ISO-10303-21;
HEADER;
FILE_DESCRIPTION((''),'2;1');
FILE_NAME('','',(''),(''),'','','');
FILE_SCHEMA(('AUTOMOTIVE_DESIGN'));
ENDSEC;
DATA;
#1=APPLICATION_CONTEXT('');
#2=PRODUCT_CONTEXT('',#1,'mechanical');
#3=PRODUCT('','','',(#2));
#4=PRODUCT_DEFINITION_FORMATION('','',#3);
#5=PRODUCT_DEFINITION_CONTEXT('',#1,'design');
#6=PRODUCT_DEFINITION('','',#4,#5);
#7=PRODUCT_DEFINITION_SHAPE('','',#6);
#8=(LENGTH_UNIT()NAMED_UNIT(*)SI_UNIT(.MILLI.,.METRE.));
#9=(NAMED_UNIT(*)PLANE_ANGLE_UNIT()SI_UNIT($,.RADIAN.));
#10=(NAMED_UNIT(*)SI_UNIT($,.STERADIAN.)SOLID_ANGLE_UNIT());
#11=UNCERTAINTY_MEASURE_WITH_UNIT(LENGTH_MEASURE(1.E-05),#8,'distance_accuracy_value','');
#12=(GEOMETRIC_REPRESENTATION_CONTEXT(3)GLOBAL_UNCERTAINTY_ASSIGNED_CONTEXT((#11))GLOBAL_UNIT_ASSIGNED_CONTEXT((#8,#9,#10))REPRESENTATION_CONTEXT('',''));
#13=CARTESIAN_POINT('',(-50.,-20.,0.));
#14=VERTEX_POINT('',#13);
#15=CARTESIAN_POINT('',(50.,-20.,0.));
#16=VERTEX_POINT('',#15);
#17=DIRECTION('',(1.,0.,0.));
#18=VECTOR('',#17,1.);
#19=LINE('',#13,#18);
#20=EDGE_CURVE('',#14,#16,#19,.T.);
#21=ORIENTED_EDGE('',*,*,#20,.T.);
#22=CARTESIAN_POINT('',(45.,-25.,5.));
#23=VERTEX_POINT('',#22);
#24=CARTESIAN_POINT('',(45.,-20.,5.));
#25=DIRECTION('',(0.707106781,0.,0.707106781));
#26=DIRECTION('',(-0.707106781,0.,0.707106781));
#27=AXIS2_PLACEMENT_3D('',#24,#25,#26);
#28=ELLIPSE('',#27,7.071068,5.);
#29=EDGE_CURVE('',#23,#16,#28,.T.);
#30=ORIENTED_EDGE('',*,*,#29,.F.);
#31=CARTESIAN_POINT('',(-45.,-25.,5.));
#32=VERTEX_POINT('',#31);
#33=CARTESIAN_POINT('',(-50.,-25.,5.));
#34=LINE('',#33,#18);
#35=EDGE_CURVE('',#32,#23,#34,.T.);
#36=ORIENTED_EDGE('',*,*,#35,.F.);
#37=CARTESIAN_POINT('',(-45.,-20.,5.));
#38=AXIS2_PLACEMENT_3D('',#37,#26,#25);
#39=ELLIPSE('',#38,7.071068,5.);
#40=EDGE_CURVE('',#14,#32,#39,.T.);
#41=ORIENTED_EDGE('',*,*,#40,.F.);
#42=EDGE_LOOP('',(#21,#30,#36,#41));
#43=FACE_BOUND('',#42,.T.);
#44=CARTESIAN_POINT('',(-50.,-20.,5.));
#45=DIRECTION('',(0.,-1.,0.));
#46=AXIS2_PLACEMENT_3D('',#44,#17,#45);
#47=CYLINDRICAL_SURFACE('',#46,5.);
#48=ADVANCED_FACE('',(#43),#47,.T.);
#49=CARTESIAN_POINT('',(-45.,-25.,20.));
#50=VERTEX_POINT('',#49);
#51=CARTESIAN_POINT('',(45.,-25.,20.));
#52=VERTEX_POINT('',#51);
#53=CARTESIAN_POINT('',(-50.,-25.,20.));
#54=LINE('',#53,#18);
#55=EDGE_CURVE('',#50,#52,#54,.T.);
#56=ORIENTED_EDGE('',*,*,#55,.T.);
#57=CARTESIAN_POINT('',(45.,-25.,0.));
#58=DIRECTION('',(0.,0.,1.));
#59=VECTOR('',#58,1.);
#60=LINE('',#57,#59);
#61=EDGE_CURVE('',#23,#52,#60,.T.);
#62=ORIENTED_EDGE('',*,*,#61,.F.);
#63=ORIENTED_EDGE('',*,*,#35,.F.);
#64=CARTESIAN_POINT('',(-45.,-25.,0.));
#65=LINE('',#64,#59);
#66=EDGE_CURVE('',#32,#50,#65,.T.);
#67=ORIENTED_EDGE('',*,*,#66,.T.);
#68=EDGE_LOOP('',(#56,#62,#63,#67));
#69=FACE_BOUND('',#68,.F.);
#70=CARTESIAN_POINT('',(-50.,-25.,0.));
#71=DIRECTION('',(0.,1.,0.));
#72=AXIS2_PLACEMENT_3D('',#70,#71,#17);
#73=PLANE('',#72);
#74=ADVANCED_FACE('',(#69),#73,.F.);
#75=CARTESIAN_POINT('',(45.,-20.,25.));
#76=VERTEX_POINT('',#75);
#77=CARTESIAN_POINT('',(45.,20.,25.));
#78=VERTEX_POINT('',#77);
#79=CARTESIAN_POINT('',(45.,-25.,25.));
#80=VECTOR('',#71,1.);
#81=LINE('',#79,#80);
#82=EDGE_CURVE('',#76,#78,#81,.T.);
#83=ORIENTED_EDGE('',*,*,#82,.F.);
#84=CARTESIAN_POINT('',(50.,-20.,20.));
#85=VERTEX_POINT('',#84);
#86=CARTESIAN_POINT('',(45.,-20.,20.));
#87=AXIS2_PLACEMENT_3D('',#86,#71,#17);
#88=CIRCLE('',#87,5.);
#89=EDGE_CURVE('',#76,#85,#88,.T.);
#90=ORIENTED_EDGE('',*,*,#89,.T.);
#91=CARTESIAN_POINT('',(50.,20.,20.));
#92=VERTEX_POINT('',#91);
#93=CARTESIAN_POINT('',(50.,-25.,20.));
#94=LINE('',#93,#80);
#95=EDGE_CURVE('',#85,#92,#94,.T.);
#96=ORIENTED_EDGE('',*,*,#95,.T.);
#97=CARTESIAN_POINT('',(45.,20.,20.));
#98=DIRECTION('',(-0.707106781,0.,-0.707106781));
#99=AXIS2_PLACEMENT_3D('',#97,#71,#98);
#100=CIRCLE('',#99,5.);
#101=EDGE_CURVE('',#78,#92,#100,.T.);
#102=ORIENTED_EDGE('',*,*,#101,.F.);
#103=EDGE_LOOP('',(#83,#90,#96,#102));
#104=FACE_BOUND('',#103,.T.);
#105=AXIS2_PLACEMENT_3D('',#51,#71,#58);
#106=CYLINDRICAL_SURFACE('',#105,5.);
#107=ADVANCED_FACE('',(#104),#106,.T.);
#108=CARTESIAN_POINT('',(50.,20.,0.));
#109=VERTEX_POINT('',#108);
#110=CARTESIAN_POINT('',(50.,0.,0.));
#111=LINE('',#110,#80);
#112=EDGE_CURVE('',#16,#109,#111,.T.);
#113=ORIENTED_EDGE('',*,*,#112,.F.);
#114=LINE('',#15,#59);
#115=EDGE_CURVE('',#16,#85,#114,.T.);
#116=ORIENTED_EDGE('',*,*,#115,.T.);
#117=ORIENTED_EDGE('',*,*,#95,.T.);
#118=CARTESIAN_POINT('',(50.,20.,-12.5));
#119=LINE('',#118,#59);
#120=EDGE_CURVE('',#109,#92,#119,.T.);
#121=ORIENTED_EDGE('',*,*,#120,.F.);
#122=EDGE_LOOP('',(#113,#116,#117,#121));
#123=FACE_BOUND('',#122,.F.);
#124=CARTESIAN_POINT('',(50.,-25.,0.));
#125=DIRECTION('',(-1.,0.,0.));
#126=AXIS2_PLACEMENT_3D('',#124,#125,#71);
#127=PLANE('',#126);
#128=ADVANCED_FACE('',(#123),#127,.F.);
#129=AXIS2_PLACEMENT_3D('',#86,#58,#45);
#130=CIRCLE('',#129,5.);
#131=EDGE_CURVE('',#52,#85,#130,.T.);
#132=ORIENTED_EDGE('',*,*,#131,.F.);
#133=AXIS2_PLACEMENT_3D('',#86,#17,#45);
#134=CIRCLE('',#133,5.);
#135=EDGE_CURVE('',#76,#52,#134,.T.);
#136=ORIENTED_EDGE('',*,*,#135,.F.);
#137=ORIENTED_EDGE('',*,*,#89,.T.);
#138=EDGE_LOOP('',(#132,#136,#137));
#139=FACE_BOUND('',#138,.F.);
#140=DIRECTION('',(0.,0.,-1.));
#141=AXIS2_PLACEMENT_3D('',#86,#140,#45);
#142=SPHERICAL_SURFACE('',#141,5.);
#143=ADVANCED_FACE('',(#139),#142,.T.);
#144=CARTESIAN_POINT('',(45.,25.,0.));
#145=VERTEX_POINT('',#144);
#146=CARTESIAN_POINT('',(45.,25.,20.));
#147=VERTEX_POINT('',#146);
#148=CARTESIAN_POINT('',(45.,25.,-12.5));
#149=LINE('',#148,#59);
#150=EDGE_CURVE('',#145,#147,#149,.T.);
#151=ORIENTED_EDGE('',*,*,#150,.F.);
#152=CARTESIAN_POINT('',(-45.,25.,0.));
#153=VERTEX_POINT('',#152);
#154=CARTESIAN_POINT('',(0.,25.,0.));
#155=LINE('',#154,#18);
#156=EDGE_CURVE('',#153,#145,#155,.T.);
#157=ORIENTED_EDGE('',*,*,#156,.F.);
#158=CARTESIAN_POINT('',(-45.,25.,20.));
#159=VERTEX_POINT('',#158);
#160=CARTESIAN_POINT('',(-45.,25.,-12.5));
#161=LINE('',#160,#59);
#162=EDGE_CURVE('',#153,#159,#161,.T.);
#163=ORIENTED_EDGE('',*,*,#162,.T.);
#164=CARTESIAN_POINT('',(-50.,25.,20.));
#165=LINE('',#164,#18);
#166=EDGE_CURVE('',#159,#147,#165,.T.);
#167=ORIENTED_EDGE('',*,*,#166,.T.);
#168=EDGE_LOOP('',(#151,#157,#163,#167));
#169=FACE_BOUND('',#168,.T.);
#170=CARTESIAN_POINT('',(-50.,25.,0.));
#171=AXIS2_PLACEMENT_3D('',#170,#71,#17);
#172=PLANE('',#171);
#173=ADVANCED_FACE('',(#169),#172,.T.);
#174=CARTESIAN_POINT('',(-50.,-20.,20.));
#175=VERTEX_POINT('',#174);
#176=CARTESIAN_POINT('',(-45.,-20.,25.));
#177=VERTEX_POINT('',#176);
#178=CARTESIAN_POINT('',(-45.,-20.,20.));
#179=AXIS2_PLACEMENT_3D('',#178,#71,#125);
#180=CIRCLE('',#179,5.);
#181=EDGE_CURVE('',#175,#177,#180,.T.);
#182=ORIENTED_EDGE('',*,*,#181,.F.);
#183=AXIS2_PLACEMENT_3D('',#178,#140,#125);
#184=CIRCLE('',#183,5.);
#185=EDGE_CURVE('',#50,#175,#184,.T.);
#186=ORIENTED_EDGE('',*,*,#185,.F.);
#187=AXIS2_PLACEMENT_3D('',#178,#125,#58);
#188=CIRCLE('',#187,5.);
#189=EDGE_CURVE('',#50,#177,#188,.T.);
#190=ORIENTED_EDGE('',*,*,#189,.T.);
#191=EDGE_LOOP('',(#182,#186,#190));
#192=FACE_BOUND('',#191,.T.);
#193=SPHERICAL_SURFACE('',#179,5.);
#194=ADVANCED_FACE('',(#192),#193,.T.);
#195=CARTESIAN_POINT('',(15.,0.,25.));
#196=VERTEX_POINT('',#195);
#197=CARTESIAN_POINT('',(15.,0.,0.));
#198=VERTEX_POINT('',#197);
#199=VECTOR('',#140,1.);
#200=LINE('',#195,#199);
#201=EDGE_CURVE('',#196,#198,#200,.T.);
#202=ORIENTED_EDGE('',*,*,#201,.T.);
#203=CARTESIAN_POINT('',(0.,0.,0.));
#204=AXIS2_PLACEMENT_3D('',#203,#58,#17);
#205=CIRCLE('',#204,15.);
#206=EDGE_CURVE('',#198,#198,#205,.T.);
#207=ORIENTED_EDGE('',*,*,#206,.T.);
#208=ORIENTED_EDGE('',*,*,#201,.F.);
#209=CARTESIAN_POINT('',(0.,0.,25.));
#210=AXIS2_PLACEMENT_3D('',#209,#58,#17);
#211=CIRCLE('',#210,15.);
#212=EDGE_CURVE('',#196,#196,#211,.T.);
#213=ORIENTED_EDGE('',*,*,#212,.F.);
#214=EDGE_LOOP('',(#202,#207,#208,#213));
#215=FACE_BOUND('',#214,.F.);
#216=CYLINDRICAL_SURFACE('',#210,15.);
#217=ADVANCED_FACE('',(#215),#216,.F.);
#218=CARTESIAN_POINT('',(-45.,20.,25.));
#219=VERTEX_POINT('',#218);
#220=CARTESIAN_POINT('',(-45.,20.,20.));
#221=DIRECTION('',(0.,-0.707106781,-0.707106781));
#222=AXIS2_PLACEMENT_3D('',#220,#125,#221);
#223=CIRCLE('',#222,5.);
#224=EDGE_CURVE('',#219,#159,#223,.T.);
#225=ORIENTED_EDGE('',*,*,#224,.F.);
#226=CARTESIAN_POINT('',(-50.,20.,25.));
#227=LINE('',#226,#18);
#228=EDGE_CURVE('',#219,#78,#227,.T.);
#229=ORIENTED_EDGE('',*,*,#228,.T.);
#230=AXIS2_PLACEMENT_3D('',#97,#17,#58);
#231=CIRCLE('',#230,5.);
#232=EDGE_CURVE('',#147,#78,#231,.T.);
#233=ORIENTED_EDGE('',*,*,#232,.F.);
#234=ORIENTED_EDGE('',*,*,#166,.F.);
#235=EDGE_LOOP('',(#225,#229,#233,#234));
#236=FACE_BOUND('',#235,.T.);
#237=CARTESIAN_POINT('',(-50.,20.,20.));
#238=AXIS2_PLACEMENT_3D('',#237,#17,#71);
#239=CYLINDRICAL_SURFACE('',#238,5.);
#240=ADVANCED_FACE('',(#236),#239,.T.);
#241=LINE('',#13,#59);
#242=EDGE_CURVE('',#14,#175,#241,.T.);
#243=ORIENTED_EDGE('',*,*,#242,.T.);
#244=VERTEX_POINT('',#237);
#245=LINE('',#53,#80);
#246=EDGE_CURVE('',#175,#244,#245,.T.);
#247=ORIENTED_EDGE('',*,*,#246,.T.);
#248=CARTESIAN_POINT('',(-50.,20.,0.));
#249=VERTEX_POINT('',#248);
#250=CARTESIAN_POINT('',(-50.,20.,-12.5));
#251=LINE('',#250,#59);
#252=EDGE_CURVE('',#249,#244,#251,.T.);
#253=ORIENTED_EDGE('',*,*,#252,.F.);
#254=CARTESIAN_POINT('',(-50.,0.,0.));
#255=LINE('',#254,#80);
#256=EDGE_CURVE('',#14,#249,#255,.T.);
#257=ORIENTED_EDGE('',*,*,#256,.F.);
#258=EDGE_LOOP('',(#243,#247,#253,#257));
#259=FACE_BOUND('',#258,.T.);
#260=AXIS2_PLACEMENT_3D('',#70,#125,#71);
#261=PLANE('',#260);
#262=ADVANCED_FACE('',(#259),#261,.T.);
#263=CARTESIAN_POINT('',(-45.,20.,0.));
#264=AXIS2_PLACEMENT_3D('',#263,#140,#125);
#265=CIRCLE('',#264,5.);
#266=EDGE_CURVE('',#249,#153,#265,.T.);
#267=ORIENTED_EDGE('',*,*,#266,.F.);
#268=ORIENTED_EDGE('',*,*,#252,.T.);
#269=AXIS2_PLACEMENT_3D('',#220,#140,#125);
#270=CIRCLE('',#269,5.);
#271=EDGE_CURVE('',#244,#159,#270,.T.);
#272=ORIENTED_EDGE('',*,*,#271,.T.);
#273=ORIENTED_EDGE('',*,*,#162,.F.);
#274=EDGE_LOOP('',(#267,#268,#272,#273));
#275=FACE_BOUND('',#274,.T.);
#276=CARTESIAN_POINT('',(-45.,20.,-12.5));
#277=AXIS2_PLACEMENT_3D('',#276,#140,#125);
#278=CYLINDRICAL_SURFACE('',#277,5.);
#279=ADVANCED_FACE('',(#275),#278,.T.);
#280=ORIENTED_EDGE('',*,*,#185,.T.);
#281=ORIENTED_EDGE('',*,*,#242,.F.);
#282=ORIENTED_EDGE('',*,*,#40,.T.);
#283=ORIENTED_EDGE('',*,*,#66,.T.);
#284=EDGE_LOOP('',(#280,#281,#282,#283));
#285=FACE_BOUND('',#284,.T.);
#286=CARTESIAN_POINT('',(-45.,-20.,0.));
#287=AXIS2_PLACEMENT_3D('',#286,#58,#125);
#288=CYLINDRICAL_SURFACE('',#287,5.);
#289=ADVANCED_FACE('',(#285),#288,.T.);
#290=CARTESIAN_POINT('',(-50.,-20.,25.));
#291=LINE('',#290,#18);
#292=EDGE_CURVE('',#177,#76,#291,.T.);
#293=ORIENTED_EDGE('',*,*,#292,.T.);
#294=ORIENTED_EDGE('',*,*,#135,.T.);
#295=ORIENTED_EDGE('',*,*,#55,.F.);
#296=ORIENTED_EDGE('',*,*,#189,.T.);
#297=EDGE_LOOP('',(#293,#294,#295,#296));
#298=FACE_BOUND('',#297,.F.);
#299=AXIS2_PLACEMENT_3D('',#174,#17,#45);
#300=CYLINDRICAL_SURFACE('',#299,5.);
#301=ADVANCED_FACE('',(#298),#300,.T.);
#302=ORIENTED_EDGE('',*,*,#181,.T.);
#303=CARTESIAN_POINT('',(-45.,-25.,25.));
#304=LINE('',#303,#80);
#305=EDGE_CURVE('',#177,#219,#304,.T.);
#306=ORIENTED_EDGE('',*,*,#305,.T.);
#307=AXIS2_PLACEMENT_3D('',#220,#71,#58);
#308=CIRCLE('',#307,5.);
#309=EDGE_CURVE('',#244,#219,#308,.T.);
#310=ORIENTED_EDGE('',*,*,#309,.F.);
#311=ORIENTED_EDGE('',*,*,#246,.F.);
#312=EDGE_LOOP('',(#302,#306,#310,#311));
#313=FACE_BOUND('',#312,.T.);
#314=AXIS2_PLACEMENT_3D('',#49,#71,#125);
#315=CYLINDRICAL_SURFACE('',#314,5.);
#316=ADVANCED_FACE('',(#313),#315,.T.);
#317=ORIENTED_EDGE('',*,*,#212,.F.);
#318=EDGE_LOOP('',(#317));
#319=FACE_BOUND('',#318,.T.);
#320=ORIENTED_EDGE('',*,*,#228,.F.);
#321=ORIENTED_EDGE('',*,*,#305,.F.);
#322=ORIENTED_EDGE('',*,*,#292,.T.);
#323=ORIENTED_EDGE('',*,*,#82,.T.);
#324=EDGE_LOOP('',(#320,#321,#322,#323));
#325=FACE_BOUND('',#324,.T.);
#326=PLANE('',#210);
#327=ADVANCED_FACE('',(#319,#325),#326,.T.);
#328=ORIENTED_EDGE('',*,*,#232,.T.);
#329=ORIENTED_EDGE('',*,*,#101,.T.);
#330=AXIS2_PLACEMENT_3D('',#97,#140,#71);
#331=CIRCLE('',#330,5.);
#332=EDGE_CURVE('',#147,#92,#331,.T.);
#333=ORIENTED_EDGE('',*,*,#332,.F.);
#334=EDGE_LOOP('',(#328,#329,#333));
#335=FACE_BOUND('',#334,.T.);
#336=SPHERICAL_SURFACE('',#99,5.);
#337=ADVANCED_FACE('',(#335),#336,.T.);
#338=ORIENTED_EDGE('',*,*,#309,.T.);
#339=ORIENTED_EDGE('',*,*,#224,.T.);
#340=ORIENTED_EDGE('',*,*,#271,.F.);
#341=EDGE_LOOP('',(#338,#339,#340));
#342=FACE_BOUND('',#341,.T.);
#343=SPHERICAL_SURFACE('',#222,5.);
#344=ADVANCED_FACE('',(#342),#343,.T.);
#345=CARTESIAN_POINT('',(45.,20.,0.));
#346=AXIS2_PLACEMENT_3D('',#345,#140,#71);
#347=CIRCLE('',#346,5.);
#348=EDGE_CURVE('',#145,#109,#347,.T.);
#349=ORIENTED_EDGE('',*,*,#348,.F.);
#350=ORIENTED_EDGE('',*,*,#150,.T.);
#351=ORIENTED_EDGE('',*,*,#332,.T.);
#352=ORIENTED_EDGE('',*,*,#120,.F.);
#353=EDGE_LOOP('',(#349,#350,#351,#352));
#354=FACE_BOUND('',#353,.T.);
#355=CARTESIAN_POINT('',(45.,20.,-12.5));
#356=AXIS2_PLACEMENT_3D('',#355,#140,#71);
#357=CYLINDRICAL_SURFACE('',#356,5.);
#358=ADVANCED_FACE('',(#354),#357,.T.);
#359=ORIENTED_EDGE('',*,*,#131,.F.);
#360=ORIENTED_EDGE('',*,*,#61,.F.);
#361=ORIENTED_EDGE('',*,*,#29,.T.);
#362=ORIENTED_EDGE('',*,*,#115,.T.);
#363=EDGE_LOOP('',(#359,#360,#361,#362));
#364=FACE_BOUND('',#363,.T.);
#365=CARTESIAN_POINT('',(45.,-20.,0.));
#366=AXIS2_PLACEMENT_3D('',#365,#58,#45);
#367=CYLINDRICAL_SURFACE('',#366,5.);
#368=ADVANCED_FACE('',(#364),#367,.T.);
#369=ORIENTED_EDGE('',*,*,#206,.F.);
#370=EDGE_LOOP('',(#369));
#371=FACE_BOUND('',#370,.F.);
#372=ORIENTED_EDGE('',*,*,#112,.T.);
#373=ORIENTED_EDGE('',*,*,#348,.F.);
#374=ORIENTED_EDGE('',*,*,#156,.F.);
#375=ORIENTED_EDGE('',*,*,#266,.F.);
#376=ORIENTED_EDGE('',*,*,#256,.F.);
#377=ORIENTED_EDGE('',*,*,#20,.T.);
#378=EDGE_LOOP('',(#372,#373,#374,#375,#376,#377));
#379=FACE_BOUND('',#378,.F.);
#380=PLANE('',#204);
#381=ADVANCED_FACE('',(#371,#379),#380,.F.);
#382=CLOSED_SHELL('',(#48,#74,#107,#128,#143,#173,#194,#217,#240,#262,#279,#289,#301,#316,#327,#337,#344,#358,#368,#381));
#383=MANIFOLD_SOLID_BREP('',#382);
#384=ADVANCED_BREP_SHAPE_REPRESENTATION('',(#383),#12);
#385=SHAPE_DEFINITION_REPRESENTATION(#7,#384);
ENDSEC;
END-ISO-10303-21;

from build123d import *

# Parameters (mm, degrees)
F0_W        = 100
F0_H        = 50
F1_DEPTH    = 25
F2_R        = 15
F3_DEPTH    = 25.001
F4_R        = 5
F5_T1_DEPTH = 32.5
F5_S5_W     = 5
F5_S5_H     = 5
F5_T6_DEPTH = 5
F6_T1_DEPTH = 32.5
F6_S5_W     = 5
F6_S5_H     = 5
F6_T6_DEPTH = 5


# Not quite as in the source:
# - a fillet or chamfer that OpenCascade refuses, or shapes differently, is made with other operations: its cross-section is extruded or revolved along the edge and cut away or added


with BuildPart() as f1:
    # F0 (on Top) → F1 (new body)
    with BuildSketch(Plane.XY):
        Rectangle(F0_W, F0_H)
    extrude(amount=F1_DEPTH)

    # F2 (on face) → F3 (cut, through all)
    with BuildSketch(Plane.XY.offset(25)):
        Circle(F2_R)
    extrude(amount=-F3_DEPTH, mode=Mode.SUBTRACT)

    # F4
    f4_edges = [f1.edges().sort_by_distance(p)[0] for p in [
        (0, 25, 25),
        (-50, 0, 25),
        (-50, -25, 12.5),
        (50, -25, 12.5),
        (0, -25, 0),
        (0, -25, 25),
        (50, 0, 25),
    ]]
    fillet(f4_edges, radius=F4_R)

    # F5: fillet of radius 5 on 1 edges, made by hand

    # F5_s2 → F5_t1 (cut)
    with BuildSketch(Plane.XY.offset(-12.5)):
        with BuildLine():
            ThreePointArc((-50, 20), (-48.5355339059, 23.5355339059), (-45, 25))
            Line((-45, 25), (-50, 25))
            Line((-50, 25), (-50, 20))
        make_face()
    extrude(amount=F5_T1_DEPTH, mode=Mode.SUBTRACT)


with BuildPart() as f5_tool4:
    # F5_s5 → F5_t6 (new body)
    with BuildSketch(Plane.YZ.offset(-45)):
        with Locations((22.5, 22.5)):
            Rectangle(F5_S5_W, F5_S5_H)
    extrude(amount=-F5_T6_DEPTH)

    # F5_s7 → F5_t8 (revolve, cut)
    with BuildSketch(Plane(origin=(-45, 20, 20), x_dir=(0, -0.7071067812, -0.7071067812), z_dir=(0, 0.7071067812, -0.7071067812))):
        with BuildLine():
            ThreePointArc((0, -5), (5, 0), (0, 5))
            Line((0, 5), (0, -5))
        make_face()
    revolve(axis=Axis((-45, 20, 20), (-1, 0, 0)), mode=Mode.SUBTRACT)


with BuildPart() as f1_1:
    add(f1.part)

    # F5_t3: cut F5_tool4
    add(f5_tool4.part, mode=Mode.SUBTRACT)

    # F6: fillet of radius 5 on 1 edges, made by hand

    # F6_s2 → F6_t1 (cut)
    with BuildSketch(Plane.XY.offset(-12.5)):
        with BuildLine():
            ThreePointArc((45, 25), (48.5355339059, 23.5355339059), (50, 20))
            Line((50, 20), (50, 25))
            Line((50, 25), (45, 25))
        make_face()
    extrude(amount=F6_T1_DEPTH, mode=Mode.SUBTRACT)


with BuildPart() as f6_tool4:
    # F6_s5 → F6_t6 (new body)
    with BuildSketch(Plane.XZ.offset(-20)):
        with Locations((47.5, 22.5)):
            Rectangle(F6_S5_W, F6_S5_H)
    extrude(amount=-F6_T6_DEPTH)

    # F6_s7 → F6_t8 (revolve, cut)
    with BuildSketch(Plane(origin=(45, 20, 20), x_dir=(-0.7071067812, 0, -0.7071067812), z_dir=(0.7071067812, 0, -0.7071067812))):
        with BuildLine():
            ThreePointArc((0, -5), (5, 0), (0, 5))
            Line((0, 5), (0, -5))
        make_face()
    revolve(axis=Axis((45, 20, 20), (0, 1, 0)), mode=Mode.SUBTRACT)


with BuildPart() as f1_2:
    add(f1_1.part)

    # F6_t3: cut F6_tool4
    add(f6_tool4.part, mode=Mode.SUBTRACT)


solid = f1_2.part
